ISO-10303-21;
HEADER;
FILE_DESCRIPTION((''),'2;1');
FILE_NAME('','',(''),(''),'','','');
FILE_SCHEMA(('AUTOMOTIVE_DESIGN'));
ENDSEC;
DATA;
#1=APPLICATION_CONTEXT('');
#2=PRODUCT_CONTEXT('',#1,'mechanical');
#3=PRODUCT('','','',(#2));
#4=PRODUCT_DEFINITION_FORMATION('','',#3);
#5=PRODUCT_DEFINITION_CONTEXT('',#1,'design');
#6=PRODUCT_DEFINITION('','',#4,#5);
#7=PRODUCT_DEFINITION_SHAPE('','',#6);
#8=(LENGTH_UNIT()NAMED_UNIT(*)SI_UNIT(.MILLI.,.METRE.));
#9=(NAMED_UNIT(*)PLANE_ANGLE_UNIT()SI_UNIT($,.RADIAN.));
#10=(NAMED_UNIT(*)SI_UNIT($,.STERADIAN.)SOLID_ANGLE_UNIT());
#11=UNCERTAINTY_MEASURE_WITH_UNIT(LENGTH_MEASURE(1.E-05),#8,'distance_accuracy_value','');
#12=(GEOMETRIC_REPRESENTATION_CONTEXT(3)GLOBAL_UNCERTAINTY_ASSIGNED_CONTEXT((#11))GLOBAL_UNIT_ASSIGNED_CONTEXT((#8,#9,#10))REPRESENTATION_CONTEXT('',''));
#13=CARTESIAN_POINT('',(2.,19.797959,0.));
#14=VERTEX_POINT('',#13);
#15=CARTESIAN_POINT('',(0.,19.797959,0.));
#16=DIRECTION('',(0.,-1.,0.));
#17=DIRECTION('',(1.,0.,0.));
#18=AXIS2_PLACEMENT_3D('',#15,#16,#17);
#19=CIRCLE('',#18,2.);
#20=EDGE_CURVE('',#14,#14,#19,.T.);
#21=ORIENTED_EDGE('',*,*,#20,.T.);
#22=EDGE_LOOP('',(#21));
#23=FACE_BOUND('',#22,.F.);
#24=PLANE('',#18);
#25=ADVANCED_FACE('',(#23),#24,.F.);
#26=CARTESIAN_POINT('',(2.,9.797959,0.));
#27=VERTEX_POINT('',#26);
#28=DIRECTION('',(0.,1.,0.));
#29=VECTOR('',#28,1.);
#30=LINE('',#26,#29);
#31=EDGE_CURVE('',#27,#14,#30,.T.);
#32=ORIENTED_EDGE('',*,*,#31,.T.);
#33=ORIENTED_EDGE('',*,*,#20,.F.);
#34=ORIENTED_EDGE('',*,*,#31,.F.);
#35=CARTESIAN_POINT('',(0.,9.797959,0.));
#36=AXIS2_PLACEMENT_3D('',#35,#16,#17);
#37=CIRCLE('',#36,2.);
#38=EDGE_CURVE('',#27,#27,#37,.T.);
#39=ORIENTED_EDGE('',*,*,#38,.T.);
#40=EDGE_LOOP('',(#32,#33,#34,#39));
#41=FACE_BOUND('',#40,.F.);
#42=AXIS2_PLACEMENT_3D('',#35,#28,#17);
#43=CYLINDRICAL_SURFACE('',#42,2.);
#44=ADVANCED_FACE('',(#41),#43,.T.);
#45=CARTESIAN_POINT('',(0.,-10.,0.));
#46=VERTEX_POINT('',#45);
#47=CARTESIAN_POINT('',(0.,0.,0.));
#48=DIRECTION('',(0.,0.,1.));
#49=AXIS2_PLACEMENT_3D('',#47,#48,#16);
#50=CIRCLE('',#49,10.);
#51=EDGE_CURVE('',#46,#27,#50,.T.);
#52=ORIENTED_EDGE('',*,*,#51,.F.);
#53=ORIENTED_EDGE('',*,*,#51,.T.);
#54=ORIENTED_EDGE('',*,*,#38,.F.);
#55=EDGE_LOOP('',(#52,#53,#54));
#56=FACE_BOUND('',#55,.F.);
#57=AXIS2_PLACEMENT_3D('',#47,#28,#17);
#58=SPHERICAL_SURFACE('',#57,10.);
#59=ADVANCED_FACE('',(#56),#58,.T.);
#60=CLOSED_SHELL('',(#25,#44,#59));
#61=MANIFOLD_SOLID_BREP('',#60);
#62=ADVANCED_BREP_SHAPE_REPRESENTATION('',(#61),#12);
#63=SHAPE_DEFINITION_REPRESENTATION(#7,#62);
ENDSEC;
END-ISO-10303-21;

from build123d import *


# Not quite as in the source:
# - a feature names something its author has since deleted; it is built from what else it names


with BuildPart() as f1:
    # F0 (on Top) → F1 (revolve)
    with BuildSketch(Plane.XY):
        with BuildLine():
            Line((0, 9.7979589711), (0, -10))
            ThreePointArc((0, -10), (9.9493615301, -1.0050896201), (2, 9.7979589711))
            Line((2, 9.7979589711), (2, 19.7979589711))
            Line((2, 19.7979589711), (0, 19.7979589711))
            Line((0, 19.7979589711), (0, 9.7979589711))
        make_face()
    revolve(axis=Axis((0, -0.1010205144, 0), (0, -1, 0)))


solid = f1.part
